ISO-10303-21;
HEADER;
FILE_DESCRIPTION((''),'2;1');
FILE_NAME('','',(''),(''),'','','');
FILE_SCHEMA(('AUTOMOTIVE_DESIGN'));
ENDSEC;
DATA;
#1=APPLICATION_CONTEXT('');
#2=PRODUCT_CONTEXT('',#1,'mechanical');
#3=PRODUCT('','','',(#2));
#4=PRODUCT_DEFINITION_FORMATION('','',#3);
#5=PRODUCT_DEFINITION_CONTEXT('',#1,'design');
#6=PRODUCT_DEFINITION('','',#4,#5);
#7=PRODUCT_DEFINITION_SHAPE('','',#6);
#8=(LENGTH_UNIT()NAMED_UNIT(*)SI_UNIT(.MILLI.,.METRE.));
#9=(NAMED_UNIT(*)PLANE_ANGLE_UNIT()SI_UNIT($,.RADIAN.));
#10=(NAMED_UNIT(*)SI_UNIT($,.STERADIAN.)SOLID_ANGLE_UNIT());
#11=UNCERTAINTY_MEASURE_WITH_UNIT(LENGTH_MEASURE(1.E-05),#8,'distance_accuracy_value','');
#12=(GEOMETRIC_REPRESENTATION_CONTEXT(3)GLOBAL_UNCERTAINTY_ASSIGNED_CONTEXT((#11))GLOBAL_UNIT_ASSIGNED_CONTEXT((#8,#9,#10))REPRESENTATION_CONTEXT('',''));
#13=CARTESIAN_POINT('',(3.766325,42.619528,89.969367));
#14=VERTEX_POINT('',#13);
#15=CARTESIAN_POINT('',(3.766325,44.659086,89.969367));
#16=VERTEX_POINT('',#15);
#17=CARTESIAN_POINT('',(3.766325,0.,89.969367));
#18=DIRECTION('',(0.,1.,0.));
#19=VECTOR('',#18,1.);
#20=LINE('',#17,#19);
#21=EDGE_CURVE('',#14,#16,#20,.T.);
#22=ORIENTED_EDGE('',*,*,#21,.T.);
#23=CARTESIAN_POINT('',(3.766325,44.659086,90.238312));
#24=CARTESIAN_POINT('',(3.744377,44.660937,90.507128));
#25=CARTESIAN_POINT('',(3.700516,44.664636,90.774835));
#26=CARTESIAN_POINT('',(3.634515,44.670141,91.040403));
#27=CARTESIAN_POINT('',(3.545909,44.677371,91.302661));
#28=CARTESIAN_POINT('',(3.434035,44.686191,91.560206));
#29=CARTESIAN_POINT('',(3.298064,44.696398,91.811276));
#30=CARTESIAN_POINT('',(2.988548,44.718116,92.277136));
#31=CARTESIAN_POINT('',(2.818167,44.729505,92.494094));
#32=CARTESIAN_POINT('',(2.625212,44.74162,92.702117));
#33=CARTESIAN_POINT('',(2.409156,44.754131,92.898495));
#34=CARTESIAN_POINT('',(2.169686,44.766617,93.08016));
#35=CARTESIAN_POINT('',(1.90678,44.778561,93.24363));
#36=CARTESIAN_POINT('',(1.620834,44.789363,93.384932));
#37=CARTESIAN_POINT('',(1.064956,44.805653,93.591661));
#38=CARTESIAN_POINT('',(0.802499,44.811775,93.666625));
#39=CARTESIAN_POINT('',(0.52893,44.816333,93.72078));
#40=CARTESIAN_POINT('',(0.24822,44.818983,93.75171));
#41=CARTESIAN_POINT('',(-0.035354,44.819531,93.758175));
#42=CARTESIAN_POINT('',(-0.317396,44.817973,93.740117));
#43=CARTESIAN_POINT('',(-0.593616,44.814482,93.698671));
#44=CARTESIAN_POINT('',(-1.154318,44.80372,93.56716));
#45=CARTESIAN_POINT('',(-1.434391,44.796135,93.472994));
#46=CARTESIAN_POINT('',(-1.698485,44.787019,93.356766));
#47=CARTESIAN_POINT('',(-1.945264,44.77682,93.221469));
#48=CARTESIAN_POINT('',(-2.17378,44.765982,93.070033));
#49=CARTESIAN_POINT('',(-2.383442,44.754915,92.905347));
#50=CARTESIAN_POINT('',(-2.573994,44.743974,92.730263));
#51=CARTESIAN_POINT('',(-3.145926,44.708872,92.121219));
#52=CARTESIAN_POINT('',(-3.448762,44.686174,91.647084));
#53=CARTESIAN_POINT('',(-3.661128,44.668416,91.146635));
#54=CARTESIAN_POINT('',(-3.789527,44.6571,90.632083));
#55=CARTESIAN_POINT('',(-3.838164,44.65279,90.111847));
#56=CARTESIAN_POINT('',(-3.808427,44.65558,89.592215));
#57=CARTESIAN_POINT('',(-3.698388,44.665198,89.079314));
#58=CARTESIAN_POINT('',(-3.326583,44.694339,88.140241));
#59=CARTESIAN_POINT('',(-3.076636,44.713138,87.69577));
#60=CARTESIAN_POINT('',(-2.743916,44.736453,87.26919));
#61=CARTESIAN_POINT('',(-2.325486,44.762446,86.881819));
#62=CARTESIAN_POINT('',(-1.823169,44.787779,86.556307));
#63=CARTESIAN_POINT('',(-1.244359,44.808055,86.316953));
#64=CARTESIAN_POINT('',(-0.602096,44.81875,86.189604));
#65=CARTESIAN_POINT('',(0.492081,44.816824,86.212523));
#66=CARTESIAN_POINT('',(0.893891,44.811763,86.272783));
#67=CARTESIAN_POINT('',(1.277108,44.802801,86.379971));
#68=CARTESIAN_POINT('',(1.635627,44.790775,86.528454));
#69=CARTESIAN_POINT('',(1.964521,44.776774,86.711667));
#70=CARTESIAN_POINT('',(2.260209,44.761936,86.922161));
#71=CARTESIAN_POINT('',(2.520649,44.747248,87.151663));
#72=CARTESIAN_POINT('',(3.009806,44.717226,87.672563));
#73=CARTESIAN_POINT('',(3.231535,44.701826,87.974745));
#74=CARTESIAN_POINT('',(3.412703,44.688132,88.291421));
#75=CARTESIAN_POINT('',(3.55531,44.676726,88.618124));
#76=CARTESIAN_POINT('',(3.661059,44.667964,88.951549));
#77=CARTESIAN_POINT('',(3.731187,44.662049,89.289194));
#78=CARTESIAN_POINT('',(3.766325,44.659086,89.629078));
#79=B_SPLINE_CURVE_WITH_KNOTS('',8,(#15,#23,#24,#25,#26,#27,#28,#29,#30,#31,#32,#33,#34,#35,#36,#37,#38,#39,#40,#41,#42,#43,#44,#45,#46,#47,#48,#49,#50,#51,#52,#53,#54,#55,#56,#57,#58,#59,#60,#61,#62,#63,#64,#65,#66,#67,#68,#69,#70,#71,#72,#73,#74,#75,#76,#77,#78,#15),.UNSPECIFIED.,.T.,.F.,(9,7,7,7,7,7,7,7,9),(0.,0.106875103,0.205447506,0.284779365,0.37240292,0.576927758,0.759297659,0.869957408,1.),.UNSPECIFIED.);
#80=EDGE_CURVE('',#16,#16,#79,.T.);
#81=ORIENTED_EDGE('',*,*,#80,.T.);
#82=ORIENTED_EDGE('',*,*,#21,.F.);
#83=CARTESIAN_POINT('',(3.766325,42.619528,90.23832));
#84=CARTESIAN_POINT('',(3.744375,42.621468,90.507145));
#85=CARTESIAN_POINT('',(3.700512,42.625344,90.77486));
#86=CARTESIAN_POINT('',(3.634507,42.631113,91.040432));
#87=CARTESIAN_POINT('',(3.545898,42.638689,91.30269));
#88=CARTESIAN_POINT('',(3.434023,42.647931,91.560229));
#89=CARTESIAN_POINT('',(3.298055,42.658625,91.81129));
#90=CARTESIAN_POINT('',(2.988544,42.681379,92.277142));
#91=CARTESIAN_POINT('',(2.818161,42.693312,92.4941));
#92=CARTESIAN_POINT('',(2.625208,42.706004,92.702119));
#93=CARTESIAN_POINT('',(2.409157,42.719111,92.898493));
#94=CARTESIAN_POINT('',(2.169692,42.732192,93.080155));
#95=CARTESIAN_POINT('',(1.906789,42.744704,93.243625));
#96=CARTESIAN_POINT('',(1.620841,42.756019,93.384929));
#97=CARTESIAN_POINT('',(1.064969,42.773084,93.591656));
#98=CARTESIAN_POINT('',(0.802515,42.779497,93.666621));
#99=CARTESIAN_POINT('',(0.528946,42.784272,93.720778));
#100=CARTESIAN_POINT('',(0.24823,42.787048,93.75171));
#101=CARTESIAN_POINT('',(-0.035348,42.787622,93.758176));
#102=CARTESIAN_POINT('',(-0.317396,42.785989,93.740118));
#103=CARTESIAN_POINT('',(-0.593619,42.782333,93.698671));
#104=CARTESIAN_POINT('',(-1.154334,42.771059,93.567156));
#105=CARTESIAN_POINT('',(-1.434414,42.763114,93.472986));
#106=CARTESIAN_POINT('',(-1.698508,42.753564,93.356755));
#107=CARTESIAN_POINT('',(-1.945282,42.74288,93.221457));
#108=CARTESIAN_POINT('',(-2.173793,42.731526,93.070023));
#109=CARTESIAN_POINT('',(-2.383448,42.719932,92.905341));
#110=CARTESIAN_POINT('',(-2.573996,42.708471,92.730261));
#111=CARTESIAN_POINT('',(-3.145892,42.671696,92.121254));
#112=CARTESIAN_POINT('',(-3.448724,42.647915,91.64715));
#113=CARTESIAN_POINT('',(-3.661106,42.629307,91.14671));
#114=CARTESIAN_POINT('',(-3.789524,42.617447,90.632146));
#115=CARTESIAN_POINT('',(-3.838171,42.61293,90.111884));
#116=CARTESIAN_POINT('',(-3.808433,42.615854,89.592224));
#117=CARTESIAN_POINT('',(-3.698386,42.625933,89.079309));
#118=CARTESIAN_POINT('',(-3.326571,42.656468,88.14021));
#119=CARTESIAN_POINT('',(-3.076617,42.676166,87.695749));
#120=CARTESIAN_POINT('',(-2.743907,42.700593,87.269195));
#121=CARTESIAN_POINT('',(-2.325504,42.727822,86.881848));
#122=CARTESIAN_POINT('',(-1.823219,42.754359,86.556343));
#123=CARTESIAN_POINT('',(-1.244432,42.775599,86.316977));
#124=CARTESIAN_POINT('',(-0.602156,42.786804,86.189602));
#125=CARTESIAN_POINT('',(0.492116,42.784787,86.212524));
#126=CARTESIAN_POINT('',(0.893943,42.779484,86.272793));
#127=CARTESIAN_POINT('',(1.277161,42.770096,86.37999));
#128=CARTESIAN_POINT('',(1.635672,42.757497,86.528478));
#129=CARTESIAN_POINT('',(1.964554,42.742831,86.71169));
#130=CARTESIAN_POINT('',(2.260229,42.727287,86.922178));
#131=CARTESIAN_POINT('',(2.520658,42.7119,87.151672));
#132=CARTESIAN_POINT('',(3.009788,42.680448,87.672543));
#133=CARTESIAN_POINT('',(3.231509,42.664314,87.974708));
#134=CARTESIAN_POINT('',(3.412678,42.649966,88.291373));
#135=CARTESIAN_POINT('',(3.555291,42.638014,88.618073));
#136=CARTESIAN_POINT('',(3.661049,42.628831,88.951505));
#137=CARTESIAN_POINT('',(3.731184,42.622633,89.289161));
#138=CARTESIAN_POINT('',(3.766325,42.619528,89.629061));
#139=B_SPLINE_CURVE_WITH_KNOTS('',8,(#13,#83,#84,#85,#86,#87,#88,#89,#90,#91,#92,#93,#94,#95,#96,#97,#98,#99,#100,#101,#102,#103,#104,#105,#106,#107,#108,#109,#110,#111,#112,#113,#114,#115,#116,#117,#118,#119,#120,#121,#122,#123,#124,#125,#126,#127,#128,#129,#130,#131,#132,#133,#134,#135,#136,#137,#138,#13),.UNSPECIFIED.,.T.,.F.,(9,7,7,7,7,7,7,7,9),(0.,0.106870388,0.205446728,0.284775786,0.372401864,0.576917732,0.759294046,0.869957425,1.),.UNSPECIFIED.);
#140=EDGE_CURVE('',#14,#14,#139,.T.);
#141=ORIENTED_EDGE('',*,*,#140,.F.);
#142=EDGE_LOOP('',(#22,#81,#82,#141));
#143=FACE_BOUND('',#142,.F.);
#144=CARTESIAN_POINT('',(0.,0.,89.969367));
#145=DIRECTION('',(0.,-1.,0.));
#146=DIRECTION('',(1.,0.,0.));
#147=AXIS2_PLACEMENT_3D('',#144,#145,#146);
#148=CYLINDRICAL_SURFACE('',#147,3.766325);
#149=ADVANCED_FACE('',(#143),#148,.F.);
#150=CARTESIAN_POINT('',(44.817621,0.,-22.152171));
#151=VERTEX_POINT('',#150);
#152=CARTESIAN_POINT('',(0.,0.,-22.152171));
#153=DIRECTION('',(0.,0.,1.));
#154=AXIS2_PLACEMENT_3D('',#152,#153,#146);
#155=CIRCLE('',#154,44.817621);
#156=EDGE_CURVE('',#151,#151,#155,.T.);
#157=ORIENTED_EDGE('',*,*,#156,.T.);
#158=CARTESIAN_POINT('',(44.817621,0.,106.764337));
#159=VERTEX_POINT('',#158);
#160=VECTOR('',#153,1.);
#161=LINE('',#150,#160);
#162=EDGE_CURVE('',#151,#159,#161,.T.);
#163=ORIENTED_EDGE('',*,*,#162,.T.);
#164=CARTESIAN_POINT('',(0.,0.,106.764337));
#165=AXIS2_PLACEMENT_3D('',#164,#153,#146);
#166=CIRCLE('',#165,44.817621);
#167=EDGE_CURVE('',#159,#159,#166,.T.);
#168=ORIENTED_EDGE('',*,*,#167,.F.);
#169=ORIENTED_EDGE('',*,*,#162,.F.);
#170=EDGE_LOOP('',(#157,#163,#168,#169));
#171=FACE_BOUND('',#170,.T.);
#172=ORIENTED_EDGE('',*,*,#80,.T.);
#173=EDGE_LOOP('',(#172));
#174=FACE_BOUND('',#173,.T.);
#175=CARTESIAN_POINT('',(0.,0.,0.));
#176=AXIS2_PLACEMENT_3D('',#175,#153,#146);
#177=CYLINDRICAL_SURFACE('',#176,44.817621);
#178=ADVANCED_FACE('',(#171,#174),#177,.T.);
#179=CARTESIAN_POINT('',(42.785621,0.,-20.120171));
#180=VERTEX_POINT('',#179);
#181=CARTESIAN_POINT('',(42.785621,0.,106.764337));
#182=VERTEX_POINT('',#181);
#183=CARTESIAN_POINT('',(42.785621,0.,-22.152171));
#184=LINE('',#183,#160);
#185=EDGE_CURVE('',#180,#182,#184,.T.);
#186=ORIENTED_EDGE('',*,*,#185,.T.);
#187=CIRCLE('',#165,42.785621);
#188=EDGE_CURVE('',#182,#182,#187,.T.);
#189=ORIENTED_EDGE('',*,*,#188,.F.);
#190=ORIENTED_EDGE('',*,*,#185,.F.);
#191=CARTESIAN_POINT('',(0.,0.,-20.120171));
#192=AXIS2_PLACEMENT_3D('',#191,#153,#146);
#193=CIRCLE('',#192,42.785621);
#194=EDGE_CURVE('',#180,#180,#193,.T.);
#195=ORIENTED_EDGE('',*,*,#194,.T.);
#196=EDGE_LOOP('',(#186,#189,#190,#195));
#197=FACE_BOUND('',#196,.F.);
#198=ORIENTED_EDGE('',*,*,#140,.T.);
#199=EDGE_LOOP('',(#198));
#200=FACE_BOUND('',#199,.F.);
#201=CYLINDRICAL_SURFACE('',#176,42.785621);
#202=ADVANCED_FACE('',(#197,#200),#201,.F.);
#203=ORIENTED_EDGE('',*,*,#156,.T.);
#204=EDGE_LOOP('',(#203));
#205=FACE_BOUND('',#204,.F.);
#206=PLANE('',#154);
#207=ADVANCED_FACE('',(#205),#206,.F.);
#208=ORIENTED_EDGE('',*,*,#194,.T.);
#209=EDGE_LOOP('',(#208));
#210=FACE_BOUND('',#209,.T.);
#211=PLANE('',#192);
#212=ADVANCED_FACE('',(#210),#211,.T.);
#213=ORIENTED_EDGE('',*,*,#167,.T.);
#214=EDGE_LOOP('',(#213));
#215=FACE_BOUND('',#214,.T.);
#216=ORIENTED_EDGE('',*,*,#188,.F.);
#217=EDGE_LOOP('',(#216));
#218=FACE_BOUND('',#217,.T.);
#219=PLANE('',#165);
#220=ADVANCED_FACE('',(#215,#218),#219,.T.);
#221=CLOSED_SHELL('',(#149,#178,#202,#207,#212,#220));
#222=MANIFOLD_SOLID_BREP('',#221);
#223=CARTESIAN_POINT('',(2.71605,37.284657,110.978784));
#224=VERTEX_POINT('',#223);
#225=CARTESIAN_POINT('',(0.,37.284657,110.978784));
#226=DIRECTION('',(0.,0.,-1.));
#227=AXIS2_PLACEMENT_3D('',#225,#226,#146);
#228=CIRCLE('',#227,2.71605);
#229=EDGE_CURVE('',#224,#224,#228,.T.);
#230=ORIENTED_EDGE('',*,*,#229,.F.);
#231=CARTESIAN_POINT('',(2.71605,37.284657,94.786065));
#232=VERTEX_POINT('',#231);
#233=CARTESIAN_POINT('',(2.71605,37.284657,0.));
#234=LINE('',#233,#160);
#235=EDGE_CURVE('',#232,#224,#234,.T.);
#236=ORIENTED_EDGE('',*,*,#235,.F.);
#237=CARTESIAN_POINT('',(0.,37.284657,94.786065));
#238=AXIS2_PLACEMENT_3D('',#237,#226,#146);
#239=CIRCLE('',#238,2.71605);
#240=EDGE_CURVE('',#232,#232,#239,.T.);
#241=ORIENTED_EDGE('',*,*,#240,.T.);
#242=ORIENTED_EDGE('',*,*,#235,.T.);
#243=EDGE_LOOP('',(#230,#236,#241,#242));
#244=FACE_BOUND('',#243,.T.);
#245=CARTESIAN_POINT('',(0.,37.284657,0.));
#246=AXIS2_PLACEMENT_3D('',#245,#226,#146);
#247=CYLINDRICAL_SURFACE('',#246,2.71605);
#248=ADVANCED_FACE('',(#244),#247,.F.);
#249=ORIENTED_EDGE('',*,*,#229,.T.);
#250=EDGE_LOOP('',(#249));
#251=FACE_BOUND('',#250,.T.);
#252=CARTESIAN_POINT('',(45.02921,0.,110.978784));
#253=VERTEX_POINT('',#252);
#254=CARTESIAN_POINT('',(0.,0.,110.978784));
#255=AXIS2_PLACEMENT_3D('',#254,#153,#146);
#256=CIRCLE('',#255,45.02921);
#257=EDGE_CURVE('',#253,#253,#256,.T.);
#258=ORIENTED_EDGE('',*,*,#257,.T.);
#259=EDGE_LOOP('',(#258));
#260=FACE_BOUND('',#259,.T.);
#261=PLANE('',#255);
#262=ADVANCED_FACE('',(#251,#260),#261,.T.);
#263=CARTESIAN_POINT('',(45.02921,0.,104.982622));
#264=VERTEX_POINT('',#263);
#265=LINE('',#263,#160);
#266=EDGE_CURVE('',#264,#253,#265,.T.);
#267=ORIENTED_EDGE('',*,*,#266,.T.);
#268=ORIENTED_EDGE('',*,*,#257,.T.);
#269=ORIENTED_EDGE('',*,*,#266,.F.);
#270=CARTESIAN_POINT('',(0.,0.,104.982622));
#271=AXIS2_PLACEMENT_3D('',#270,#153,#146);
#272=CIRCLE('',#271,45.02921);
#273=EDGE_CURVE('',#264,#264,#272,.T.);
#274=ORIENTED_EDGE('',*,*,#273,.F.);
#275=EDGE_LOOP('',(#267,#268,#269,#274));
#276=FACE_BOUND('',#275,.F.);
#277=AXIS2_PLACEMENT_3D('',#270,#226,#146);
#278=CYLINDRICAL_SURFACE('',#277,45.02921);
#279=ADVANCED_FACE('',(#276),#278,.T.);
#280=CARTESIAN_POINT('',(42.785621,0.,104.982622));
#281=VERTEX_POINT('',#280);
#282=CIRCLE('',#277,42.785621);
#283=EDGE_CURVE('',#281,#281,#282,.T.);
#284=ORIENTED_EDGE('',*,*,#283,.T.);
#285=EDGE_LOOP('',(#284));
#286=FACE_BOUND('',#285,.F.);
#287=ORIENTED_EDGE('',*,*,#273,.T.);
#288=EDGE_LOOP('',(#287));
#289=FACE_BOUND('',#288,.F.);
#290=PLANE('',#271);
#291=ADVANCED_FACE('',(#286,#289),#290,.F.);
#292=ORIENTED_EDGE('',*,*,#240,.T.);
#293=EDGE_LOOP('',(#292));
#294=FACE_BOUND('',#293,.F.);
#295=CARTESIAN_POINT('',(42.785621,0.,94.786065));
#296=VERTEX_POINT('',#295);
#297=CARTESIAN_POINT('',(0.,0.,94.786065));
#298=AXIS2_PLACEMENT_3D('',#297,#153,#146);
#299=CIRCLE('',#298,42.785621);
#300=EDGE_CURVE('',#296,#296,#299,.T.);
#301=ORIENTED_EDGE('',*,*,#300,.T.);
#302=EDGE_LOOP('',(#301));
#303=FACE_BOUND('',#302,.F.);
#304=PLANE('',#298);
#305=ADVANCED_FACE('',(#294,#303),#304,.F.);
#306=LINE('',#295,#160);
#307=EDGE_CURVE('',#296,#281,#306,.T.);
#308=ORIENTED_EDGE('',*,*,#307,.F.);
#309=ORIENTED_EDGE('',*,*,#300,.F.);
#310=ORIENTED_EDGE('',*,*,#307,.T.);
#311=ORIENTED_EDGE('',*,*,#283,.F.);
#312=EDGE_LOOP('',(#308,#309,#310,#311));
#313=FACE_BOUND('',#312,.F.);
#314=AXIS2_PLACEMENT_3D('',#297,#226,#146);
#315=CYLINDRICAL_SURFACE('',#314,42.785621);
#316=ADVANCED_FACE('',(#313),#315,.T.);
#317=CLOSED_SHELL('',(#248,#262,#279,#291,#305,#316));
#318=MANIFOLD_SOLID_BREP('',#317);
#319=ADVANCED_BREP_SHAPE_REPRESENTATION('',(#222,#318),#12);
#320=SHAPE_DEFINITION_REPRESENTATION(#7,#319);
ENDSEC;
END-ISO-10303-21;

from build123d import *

# Parameters (mm, degrees)
F0_R           = 44.8176210425
F1_DEPTH       = 106.7643370479
F1_DEPTH_BACK  = 22.1521705389
F2_T           = -2.032
F3_R           = 3.7663248985
F4_DEPTH       = 59.9014814943
F5_START       = 91.4322212338
F2_FACE_R      = 42.7856210425
F5_DEPTH       = 13.5680139065
F6_T           = -1.524
F8_START       = 104.9826219678
F7_R           = 45.0292101327
F8_DEPTH       = 5.9961620718
F9_START       = 9.906
F5_FACE_R      = 42.7856210425
F9_DEPTH       = 15.494
F11_R          = 2.7160500701
F12_DEPTH      = 244.3860024214
F12_DEPTH_BACK = 45.8991546184


with BuildPart() as f1:
    # F0 (on Top) → F1 (new body, two sides)
    with BuildSketch(Plane.XY) as f1_sk:
        Circle(F0_R)
    extrude(amount=F1_DEPTH)
    extrude(f1_sk.sketch, amount=-F1_DEPTH_BACK)

    # F2
    f2_openings = [f1.faces().sort_by_distance(p)[0] for p in [
        (0, 0, 106.764337),
    ]]
    offset(amount=F2_T, openings=f2_openings)

    # F3 (on Front) → F4 (cut)
    with BuildSketch(Plane.XZ):
        with Locations((0, 89.9693667889)):
            Circle(F3_R)
    extrude(amount=-F4_DEPTH, mode=Mode.SUBTRACT)


with BuildPart() as f5:
    # F2_face (on face) → F5 (new body)
    with BuildSketch(Plane.XY.offset(-20.1201705389).offset(F5_START)):
        Circle(F2_FACE_R)
    extrude(amount=F5_DEPTH)

    # F6
    f6_openings = [f5.faces().sort_by_distance(p)[0] for p in [
        (0, 0, 71.312051),
    ]]
    offset(amount=F6_T, openings=f6_openings)


with BuildPart() as f8:
    # F7 (on Top) → F8 (new body)
    with BuildSketch(Plane.XY.offset(F8_START)):
        Circle(F7_R)
    extrude(amount=F8_DEPTH)

    # F5_face (on face) → F9 (join)
    with BuildSketch(Plane.XY.offset(84.8800646014).offset(F9_START)):
        Circle(F5_FACE_R)
    extrude(amount=F9_DEPTH)

    # F11 (on Top) → F12 (cut, two sides)
    with BuildSketch(Plane.XY) as f12_sk:
        with Locations((0, 37.2846573591)):
            Circle(F11_R)
    extrude(amount=F12_DEPTH, mode=Mode.SUBTRACT)
    extrude(f12_sk.sketch, amount=-F12_DEPTH_BACK, mode=Mode.SUBTRACT)


solid = Compound([f1.part, f8.part])
